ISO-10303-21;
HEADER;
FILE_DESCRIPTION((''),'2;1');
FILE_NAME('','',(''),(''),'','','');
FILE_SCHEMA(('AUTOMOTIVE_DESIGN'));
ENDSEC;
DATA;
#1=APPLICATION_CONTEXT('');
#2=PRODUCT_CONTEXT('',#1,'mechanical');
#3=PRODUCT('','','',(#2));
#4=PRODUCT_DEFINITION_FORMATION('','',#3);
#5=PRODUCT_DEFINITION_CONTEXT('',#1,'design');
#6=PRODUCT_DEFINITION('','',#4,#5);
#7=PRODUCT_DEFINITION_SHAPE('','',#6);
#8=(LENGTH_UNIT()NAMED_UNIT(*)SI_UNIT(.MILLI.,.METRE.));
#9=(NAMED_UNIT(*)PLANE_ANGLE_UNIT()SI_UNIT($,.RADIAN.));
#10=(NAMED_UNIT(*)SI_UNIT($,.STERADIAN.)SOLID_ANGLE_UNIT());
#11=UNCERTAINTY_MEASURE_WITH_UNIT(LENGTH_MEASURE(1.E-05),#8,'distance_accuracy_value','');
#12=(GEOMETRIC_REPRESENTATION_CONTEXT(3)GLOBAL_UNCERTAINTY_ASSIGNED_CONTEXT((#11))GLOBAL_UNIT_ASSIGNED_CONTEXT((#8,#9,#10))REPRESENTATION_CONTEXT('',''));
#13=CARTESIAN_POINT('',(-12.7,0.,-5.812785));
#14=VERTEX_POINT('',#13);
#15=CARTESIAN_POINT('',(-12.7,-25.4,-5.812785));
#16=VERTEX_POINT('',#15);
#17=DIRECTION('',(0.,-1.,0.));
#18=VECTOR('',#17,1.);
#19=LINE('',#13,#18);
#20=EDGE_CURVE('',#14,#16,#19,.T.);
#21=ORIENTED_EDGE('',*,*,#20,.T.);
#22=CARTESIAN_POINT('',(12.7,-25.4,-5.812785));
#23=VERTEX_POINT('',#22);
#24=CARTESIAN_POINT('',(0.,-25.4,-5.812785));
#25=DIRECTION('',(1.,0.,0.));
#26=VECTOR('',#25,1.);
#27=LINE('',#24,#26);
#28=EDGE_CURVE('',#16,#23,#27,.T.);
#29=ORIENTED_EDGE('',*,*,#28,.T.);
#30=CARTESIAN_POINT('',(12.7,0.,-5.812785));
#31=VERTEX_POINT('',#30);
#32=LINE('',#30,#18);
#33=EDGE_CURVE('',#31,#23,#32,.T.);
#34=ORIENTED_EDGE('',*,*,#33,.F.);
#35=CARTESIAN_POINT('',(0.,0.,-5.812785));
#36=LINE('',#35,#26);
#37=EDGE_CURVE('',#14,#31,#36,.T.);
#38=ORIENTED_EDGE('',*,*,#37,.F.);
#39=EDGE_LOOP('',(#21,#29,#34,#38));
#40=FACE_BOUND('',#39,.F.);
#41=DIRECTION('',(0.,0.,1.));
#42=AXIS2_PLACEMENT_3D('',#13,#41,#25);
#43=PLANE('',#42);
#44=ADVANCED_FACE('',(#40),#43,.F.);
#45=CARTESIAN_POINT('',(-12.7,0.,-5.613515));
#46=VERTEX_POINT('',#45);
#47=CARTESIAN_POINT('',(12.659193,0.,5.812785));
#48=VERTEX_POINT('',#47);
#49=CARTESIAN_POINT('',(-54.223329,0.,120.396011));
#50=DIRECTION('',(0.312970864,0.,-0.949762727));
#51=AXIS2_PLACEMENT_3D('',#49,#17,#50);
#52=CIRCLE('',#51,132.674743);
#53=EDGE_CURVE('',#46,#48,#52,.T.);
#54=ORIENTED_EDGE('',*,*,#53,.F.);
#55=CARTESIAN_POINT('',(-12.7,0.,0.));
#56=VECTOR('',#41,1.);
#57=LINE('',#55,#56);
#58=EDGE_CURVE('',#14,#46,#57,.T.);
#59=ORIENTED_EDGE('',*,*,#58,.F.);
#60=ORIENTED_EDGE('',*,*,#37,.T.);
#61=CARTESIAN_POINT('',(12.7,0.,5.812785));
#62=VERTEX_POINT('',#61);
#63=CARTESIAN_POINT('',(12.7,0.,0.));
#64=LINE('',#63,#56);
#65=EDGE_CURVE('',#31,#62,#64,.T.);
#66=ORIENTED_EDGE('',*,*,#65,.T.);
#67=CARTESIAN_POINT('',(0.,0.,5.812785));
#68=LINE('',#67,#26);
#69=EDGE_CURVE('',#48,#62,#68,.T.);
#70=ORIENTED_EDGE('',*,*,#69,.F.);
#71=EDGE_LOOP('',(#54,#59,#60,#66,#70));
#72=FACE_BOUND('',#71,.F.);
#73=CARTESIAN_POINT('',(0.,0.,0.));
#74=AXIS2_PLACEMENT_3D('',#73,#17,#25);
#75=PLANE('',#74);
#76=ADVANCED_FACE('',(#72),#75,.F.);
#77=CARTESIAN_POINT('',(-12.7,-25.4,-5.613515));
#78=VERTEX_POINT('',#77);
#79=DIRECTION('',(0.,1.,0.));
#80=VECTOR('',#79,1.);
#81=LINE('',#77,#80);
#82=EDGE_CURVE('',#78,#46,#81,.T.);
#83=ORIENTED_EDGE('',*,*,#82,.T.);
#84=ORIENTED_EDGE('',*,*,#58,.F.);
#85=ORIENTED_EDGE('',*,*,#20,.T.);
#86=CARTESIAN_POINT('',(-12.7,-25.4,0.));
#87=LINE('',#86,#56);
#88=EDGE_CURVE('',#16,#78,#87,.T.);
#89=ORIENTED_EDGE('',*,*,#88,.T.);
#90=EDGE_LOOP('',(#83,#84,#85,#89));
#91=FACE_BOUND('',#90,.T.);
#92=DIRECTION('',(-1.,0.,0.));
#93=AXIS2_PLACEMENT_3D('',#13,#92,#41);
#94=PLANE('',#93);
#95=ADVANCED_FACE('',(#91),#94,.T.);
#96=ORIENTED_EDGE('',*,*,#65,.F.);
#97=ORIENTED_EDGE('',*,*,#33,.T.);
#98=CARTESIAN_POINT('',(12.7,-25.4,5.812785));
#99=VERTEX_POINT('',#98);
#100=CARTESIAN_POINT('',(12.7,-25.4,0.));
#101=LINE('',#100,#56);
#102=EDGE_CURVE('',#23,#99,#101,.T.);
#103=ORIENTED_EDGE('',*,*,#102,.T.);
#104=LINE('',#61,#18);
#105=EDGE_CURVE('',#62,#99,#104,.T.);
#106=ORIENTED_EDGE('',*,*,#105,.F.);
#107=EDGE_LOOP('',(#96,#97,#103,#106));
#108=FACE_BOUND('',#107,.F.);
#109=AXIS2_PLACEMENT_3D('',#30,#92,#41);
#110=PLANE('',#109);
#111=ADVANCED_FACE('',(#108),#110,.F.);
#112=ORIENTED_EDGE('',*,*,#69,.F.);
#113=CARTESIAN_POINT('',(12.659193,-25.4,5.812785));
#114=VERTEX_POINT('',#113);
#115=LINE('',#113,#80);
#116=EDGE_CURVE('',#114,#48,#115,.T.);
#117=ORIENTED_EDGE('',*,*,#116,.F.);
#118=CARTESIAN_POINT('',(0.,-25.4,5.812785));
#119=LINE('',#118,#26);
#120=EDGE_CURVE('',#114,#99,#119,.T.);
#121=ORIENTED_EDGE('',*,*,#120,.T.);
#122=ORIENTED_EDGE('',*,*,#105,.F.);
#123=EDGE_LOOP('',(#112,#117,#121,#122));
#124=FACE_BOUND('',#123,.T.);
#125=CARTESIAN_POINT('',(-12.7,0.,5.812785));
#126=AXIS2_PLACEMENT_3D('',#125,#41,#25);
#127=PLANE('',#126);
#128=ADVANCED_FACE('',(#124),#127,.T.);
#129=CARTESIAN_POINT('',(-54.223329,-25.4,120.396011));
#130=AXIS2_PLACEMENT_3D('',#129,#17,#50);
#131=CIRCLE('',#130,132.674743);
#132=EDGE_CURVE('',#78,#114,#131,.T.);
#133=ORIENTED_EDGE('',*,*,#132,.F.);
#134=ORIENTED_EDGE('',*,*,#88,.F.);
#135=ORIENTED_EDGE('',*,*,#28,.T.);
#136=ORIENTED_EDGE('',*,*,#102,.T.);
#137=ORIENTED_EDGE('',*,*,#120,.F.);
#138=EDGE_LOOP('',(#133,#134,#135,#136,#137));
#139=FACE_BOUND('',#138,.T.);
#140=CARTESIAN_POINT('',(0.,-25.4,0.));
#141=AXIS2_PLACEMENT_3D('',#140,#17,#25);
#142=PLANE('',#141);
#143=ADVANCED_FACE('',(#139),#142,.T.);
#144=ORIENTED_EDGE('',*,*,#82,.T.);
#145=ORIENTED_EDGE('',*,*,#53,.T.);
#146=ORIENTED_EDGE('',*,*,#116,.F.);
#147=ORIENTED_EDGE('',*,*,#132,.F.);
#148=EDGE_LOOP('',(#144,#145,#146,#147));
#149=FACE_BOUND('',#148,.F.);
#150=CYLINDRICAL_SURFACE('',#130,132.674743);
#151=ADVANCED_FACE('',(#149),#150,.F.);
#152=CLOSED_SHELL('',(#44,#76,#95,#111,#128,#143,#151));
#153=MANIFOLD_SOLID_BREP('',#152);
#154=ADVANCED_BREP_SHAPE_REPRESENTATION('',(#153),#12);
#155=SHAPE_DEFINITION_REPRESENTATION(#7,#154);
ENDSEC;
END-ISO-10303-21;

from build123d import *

# Parameters (mm, degrees)
F0_W     = 25.4
F0_H     = 11.6255704415
F1_DEPTH = 25.4
F3_DEPTH = 25.401


with BuildPart() as f1:
    # F0 (on Front) → F1 (new body)
    with BuildSketch(Plane.XZ):
        Rectangle(F0_W, F0_H)
    extrude(amount=F1_DEPTH)

    # F2 (on face) → F3 (cut, through all)
    with BuildSketch(Plane.XZ.offset(25.4)):
        with BuildLine():
            Line((-12.7, 5.8127852207), (-12.7, -5.613514744))
            ThreePointArc((-12.7, -5.613514744), (0.2798565548, -0.5667526673), (12.6591933696, 5.8127852207))
            Line((12.6591933696, 5.8127852207), (-12.7, 5.8127852207))
        make_face()
    extrude(amount=-F3_DEPTH, mode=Mode.SUBTRACT)


solid = f1.part
